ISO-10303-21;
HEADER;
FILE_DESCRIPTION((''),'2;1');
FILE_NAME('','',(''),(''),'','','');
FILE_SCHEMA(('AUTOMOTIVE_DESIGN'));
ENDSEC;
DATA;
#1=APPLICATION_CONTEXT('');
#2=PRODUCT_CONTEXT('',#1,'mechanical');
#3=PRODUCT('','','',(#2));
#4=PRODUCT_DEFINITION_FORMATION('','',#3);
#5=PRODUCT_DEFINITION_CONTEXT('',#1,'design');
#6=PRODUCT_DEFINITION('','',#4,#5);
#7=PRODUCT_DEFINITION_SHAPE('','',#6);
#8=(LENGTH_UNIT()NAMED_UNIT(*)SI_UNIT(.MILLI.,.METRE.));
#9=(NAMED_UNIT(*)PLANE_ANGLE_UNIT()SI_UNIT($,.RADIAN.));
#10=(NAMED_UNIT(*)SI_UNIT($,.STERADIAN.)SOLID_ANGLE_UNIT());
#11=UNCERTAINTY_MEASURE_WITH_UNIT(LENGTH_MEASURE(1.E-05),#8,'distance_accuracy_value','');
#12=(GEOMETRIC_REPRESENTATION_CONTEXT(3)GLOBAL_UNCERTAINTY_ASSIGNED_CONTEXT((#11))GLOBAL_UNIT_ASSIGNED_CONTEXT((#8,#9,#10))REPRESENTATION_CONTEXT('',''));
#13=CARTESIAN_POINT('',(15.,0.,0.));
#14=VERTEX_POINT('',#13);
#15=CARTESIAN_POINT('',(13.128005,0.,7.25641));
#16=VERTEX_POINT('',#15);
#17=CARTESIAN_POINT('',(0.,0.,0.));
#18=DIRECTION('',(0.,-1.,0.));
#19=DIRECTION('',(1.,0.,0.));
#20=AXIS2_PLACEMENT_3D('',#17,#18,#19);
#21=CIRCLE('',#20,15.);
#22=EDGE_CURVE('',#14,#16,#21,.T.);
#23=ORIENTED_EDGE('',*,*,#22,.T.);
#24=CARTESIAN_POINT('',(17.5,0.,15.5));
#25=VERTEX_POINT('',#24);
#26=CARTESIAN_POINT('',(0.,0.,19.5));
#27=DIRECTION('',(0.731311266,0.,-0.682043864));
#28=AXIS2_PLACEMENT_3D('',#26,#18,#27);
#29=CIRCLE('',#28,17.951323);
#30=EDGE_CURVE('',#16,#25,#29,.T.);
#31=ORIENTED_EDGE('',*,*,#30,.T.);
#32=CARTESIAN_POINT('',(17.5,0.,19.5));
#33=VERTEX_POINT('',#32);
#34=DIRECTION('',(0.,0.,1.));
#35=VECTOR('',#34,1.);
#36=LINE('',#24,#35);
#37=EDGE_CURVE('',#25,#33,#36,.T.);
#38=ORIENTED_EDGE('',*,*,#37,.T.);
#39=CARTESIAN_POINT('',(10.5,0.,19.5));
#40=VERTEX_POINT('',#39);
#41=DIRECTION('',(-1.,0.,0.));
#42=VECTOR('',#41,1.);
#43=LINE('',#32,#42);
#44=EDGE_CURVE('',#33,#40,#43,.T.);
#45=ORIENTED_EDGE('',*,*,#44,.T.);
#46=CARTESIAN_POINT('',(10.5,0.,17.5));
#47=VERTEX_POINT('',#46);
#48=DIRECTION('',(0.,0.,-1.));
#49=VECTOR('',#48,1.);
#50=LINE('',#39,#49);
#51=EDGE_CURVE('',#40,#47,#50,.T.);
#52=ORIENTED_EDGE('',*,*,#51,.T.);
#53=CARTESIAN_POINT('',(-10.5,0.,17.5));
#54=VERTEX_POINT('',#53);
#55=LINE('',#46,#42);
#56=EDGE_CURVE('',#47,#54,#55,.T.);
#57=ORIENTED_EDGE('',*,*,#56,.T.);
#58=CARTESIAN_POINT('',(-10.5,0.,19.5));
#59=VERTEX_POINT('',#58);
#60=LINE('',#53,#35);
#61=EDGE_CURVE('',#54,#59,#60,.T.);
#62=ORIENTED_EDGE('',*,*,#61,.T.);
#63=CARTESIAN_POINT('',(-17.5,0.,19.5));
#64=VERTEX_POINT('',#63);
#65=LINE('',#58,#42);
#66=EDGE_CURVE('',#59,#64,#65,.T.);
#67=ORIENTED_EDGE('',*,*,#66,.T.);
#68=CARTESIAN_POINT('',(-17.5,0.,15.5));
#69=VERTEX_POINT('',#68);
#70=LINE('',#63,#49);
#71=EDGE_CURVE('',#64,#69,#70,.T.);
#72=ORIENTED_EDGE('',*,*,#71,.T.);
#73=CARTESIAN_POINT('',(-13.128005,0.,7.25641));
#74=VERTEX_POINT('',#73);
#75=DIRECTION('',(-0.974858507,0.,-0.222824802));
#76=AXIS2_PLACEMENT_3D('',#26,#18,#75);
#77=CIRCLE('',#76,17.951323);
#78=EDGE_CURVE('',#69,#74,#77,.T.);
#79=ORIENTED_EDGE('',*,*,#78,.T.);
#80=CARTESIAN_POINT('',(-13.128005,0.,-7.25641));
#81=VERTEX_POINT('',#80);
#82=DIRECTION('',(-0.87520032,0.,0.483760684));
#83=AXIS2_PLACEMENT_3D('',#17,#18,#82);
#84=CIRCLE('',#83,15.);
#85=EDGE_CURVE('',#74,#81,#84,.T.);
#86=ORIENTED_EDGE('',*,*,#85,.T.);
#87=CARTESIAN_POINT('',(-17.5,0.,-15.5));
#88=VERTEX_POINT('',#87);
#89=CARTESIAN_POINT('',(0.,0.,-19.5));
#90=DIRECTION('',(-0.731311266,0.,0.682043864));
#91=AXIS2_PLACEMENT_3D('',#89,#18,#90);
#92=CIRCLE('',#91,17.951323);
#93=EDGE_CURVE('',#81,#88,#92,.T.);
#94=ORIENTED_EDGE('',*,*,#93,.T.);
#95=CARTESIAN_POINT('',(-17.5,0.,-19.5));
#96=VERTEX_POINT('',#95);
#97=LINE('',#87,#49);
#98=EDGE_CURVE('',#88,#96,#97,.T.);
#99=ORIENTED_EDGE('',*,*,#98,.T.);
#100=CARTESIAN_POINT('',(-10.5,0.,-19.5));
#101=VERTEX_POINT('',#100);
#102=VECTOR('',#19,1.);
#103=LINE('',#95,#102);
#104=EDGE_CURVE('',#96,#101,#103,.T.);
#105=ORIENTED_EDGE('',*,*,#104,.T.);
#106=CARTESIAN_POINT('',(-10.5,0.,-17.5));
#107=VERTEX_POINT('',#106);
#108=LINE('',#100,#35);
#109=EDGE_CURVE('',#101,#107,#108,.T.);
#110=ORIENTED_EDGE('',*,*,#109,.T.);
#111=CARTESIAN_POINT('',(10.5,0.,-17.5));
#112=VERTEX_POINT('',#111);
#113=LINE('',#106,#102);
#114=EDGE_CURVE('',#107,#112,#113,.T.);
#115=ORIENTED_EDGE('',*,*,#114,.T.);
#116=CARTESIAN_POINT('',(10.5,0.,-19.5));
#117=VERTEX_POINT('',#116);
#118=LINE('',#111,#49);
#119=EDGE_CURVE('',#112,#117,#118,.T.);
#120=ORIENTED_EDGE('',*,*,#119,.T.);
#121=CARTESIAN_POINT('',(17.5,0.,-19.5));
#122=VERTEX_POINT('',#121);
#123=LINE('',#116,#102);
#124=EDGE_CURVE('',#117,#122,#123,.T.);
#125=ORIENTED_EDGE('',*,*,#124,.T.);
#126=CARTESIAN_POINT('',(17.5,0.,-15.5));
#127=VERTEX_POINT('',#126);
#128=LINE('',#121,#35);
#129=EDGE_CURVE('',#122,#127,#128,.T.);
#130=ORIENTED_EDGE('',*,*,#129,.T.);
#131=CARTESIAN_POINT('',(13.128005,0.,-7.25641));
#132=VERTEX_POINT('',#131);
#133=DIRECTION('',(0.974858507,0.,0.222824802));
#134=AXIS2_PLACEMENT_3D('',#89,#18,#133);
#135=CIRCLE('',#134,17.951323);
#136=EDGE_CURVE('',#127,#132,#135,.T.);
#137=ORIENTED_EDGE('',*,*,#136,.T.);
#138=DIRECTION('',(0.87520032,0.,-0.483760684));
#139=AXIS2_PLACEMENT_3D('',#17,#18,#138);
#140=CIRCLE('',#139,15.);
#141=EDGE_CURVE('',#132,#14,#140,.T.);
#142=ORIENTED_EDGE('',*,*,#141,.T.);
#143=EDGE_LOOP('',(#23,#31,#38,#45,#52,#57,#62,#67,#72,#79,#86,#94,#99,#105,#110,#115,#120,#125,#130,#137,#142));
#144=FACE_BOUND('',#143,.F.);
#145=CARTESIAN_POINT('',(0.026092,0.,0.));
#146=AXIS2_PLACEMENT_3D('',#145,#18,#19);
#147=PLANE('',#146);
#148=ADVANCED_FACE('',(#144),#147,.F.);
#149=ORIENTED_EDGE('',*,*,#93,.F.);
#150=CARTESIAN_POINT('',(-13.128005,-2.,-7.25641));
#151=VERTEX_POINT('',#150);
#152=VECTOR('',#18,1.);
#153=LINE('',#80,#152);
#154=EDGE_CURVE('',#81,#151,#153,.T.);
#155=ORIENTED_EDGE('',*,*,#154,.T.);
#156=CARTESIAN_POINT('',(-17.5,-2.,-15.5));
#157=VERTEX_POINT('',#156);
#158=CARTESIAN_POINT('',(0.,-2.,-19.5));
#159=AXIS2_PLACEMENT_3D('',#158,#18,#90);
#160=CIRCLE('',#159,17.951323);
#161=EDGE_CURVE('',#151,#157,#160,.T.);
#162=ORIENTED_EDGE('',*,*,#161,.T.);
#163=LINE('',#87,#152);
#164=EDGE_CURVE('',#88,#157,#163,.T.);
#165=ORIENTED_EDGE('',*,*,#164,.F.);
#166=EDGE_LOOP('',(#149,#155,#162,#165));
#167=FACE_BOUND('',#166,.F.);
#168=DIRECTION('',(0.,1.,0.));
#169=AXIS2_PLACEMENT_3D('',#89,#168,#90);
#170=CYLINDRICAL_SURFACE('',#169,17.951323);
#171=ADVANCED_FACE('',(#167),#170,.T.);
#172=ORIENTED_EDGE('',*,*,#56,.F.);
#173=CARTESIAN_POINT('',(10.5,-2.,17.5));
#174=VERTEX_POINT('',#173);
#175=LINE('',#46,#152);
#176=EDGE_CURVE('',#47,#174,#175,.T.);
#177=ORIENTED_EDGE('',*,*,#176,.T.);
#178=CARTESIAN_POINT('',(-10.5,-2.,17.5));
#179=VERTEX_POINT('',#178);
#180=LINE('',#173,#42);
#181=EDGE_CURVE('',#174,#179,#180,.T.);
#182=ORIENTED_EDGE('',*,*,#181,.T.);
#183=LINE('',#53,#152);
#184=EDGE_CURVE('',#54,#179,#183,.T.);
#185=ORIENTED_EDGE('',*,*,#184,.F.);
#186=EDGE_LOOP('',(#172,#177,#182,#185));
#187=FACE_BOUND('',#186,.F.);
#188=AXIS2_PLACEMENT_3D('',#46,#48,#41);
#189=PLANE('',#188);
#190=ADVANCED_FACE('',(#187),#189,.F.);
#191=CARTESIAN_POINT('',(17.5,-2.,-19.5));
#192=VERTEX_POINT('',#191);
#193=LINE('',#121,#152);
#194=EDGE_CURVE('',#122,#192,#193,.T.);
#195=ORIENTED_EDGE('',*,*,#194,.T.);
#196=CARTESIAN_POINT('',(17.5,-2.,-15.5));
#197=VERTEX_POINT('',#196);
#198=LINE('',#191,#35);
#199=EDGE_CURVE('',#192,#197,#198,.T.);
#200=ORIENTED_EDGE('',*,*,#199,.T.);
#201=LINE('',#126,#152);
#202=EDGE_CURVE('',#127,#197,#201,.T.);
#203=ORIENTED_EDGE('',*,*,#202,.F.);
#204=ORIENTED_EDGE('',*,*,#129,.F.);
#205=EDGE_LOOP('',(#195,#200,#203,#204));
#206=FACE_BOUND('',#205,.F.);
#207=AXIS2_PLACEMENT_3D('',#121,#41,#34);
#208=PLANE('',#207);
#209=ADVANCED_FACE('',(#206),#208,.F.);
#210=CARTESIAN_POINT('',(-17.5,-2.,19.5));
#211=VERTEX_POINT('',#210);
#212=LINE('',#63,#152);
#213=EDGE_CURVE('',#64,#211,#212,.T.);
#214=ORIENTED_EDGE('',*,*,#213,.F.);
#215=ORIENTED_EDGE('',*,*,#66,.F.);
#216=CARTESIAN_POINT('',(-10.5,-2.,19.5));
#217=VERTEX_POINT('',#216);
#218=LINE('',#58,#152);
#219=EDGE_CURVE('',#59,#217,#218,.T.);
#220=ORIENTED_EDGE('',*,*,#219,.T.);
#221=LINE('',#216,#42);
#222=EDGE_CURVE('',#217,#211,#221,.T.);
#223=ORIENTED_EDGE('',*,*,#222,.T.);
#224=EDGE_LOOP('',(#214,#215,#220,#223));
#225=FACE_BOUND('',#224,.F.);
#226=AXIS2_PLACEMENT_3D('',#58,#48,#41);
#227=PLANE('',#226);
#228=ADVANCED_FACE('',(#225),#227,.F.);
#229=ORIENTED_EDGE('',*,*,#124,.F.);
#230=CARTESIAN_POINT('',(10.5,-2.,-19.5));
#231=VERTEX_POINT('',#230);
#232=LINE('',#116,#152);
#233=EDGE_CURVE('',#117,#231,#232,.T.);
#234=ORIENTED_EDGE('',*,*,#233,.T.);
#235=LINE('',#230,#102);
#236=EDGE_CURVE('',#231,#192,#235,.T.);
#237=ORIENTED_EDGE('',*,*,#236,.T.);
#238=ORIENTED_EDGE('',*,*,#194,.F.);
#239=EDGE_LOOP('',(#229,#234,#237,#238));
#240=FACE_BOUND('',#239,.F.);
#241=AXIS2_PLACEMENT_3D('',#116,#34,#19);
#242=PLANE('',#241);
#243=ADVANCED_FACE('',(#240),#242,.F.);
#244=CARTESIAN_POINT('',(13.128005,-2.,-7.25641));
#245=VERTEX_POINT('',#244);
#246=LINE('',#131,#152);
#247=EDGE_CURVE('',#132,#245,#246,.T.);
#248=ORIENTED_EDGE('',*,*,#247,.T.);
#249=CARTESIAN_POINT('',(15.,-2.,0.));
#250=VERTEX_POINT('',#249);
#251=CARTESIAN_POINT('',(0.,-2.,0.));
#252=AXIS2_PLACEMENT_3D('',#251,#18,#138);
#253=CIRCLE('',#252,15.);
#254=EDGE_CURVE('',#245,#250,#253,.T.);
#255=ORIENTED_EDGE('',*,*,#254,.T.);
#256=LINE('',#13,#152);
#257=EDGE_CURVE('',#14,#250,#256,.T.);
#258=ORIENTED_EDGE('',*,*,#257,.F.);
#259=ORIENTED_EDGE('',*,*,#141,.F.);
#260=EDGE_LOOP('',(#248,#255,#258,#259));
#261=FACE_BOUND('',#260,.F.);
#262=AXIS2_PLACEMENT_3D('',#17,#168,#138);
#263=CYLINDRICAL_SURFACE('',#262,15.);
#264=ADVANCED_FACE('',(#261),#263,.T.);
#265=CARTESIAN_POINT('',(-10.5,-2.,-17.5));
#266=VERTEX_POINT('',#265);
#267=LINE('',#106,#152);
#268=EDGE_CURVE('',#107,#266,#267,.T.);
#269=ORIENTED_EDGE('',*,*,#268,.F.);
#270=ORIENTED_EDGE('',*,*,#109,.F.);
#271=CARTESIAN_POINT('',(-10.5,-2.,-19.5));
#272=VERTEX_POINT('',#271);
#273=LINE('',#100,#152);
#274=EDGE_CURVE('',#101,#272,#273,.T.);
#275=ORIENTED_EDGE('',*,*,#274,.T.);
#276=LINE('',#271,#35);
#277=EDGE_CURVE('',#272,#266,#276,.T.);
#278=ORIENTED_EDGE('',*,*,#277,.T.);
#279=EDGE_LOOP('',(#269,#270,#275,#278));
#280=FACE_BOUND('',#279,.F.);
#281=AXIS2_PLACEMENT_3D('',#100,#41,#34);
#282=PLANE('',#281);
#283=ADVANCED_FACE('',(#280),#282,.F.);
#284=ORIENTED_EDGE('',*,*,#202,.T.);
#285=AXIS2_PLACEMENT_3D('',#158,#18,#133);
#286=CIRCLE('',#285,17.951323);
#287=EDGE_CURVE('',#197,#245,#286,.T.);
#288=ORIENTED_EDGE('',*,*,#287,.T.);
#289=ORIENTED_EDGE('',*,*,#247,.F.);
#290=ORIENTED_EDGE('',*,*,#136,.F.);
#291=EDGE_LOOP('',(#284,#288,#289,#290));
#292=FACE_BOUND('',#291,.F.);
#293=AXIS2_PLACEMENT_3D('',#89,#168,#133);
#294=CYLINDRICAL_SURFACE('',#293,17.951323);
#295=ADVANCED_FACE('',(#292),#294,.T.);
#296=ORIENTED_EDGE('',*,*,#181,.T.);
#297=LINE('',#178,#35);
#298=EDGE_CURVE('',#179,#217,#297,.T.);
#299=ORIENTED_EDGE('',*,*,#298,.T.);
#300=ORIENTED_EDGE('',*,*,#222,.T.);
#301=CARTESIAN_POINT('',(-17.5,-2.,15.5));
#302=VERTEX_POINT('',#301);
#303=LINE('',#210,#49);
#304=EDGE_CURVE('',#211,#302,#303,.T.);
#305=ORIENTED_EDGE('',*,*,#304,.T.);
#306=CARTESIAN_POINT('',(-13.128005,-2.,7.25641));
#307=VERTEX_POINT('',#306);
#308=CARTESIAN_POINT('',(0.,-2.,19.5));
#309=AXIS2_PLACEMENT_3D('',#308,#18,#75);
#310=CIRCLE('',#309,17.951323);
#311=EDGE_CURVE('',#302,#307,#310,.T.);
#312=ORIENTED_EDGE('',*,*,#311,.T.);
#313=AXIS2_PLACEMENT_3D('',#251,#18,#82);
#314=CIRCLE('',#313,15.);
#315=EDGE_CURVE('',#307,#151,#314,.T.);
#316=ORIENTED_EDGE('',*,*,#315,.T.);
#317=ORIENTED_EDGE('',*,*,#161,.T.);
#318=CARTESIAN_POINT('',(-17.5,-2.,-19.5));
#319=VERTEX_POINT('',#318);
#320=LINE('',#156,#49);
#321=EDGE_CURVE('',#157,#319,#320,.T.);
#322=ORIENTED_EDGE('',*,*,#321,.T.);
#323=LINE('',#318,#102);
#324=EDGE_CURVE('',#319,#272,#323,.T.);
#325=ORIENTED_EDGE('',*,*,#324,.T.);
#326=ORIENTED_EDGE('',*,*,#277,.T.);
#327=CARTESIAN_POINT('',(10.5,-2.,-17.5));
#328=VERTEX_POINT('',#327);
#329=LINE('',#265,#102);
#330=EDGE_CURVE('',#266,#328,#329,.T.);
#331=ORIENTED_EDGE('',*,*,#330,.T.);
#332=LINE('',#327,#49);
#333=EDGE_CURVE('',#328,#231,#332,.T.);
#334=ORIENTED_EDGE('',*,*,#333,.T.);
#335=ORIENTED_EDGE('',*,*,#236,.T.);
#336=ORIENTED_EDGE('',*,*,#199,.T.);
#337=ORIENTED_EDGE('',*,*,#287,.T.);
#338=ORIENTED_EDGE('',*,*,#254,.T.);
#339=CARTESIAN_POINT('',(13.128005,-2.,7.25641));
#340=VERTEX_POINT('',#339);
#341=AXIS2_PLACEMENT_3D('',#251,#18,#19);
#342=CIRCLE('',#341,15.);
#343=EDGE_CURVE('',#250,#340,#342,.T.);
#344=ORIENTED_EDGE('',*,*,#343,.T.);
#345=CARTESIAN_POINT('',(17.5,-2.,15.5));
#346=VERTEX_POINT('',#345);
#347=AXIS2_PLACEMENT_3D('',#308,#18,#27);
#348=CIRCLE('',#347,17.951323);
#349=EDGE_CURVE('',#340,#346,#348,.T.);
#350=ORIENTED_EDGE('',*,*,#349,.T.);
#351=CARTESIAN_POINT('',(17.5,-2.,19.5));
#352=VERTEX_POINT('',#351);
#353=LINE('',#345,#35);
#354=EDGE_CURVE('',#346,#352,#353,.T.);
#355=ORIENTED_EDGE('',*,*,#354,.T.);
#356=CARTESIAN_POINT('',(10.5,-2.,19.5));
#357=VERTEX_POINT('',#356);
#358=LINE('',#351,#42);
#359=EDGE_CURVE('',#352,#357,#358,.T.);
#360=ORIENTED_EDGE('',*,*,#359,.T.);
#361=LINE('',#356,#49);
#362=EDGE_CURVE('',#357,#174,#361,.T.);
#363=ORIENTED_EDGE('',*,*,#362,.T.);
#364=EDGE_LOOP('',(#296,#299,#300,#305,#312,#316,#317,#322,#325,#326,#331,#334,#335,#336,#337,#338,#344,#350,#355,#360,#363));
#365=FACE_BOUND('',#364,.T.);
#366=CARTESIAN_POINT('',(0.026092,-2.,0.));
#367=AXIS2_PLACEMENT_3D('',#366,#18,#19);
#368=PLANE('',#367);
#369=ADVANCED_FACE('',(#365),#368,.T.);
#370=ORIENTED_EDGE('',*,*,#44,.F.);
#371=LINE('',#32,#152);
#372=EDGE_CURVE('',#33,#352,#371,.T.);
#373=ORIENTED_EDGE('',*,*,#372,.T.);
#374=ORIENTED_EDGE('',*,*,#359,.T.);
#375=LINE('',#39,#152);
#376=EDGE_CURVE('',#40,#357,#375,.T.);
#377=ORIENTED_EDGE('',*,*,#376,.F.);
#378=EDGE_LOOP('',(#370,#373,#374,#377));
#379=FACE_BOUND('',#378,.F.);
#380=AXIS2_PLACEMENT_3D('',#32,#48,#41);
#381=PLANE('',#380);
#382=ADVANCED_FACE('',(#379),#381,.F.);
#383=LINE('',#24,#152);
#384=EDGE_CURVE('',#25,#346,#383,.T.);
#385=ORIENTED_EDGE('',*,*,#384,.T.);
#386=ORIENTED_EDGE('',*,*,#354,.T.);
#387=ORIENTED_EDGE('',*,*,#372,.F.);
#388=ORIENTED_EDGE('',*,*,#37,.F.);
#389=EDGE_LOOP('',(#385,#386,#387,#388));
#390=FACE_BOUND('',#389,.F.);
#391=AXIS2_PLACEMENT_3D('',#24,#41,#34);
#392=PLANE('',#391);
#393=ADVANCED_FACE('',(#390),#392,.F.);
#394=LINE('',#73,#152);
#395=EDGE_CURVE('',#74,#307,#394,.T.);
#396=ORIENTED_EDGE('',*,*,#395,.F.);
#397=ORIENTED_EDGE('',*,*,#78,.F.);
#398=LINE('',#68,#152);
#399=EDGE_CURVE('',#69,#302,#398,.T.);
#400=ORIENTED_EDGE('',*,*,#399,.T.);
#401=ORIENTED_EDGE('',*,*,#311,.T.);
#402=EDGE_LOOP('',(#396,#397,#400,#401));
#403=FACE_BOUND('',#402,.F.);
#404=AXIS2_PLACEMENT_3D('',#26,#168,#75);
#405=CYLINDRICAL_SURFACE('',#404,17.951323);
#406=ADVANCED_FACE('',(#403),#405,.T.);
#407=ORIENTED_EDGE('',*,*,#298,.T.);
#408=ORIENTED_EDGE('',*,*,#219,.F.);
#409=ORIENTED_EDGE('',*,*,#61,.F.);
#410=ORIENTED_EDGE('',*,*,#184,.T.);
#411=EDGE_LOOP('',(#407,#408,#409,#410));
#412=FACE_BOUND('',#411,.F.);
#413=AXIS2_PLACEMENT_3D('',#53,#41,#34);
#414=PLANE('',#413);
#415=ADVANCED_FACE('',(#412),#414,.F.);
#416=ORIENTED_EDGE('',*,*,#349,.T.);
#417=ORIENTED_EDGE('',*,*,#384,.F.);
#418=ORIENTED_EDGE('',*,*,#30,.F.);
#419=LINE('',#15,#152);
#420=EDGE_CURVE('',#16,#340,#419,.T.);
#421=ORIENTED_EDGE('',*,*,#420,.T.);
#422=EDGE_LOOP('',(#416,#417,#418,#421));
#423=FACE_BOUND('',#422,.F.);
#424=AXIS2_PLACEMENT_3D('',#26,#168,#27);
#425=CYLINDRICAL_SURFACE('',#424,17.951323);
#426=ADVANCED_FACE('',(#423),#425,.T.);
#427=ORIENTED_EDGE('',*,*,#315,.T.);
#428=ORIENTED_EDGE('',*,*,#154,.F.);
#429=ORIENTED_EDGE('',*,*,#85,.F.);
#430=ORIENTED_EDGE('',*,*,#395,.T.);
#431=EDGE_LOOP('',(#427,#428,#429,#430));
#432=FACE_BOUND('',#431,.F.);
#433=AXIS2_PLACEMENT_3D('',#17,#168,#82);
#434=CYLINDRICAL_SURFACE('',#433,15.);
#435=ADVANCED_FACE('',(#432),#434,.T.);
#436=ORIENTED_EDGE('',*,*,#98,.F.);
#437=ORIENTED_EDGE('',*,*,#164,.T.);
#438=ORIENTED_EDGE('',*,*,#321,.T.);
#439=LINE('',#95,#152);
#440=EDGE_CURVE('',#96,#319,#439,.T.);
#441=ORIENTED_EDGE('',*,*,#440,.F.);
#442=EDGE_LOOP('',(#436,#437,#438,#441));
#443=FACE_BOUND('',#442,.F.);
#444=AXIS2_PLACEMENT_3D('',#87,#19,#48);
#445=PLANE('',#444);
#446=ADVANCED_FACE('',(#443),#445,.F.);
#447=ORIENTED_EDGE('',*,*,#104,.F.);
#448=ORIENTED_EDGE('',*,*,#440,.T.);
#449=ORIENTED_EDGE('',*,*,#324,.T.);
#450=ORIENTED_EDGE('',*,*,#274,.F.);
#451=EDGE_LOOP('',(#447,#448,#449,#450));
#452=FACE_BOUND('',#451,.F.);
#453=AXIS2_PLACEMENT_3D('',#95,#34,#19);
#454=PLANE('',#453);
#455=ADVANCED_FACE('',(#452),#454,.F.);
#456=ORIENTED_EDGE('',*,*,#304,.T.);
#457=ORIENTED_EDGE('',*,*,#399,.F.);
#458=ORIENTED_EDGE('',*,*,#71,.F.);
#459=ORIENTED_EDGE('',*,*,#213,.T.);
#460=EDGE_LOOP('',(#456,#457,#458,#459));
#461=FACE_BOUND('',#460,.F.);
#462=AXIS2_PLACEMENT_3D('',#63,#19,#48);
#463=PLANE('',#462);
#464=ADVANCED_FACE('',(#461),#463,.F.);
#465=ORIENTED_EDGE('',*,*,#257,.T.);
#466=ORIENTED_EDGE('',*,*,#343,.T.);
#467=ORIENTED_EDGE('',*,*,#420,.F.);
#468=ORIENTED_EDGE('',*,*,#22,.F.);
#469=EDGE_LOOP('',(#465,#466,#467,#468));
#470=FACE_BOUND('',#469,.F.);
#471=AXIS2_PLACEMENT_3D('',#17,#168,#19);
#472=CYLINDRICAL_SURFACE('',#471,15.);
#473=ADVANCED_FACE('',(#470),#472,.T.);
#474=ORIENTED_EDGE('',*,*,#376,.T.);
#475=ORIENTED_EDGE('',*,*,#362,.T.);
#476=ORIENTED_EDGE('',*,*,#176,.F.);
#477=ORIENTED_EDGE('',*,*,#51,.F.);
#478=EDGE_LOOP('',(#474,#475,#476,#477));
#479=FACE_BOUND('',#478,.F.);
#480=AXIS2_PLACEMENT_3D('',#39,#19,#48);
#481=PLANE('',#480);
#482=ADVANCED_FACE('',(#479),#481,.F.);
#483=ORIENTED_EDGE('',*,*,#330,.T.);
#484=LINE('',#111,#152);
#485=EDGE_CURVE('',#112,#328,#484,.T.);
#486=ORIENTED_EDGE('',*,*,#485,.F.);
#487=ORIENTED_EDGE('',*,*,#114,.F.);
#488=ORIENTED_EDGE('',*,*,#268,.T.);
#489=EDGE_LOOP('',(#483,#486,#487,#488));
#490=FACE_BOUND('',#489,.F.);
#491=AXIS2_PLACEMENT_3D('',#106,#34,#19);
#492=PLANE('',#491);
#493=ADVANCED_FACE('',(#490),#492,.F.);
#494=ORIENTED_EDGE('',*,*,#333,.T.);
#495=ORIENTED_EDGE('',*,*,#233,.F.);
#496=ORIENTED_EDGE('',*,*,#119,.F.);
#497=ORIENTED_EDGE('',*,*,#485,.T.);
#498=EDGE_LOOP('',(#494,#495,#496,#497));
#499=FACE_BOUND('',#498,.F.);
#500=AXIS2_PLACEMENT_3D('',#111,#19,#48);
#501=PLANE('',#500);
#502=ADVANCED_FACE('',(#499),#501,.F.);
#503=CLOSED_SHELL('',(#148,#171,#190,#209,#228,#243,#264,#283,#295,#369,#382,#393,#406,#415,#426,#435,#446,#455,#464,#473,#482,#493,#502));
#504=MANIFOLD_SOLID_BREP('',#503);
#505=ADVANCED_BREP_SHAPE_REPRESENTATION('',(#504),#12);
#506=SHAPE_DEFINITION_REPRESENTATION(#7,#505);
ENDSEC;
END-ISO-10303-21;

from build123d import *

# Parameters (mm, degrees)
F1_DEPTH = 2


with BuildPart() as f1:
    # F0 (on Front) → F1 (new body)
    with BuildSketch(Plane.XZ):
        with BuildLine():
            ThreePointArc((13.1280048062, -7.2564102564), (14.5244633652, -3.746993989), (15, 0))
            ThreePointArc((15, 0), (14.5244633652, 3.746993989), (13.1280048062, 7.2564102564))
            ThreePointArc((13.1280048062, 7.2564102564), (0, 1.548676929), (-13.1280048062, 7.2564102564))
            ThreePointArc((-13.1280048062, 7.2564102564), (-15, 0), (-13.1280048062, -7.2564102564))
            ThreePointArc((-13.1280048062, -7.2564102564), (0, -1.548676929), (13.1280048062, -7.2564102564))
        make_face()
        with BuildLine():
            ThreePointArc((-13.1280048062, 7.2564102564), (0, 1.548676929), (13.1280048062, 7.2564102564))
            ThreePointArc((13.1280048062, 7.2564102564), (0, 15), (-13.1280048062, 7.2564102564))
        make_face()
        with BuildLine():
            ThreePointArc((-13.1280048062, 7.2564102564), (0, 15), (13.1280048062, 7.2564102564))
            ThreePointArc((13.1280048062, 7.2564102564), (15.8589994188, 11.0891654734), (17.5, 15.5))
            Line((17.5, 15.5), (17.5, 19.5))
            Line((17.5, 19.5), (10.5, 19.5))
            Line((10.5, 19.5), (10.5, 17.5))
            Line((10.5, 17.5), (-10.5, 17.5))
            Line((-10.5, 17.5), (-10.5, 19.5))
            Line((-10.5, 19.5), (-17.5, 19.5))
            Line((-17.5, 19.5), (-17.5, 15.5))
            ThreePointArc((-17.5, 15.5), (-15.8589994188, 11.0891654734), (-13.1280048062, 7.2564102564))
        make_face()
        with BuildLine():
            ThreePointArc((17.5, -15.5), (15.8589994188, -11.0891654734), (13.1280048062, -7.2564102564))
            ThreePointArc((13.1280048062, -7.2564102564), (0, -15), (-13.1280048062, -7.2564102564))
            ThreePointArc((-13.1280048062, -7.2564102564), (-15.8589994188, -11.0891654734), (-17.5, -15.5))
            Line((-17.5, -15.5), (-17.5, -19.5))
            Line((-17.5, -19.5), (-10.5, -19.5))
            Line((-10.5, -19.5), (-10.5, -17.5))
            Line((-10.5, -17.5), (10.5, -17.5))
            Line((10.5, -17.5), (10.5, -19.5))
            Line((10.5, -19.5), (17.5, -19.5))
            Line((17.5, -19.5), (17.5, -15.5))
        make_face()
        with BuildLine():
            ThreePointArc((-13.1280048062, -7.2564102564), (0, -15), (13.1280048062, -7.2564102564))
            ThreePointArc((13.1280048062, -7.2564102564), (0, -1.548676929), (-13.1280048062, -7.2564102564))
        make_face()
    extrude(amount=F1_DEPTH)


solid = f1.part
